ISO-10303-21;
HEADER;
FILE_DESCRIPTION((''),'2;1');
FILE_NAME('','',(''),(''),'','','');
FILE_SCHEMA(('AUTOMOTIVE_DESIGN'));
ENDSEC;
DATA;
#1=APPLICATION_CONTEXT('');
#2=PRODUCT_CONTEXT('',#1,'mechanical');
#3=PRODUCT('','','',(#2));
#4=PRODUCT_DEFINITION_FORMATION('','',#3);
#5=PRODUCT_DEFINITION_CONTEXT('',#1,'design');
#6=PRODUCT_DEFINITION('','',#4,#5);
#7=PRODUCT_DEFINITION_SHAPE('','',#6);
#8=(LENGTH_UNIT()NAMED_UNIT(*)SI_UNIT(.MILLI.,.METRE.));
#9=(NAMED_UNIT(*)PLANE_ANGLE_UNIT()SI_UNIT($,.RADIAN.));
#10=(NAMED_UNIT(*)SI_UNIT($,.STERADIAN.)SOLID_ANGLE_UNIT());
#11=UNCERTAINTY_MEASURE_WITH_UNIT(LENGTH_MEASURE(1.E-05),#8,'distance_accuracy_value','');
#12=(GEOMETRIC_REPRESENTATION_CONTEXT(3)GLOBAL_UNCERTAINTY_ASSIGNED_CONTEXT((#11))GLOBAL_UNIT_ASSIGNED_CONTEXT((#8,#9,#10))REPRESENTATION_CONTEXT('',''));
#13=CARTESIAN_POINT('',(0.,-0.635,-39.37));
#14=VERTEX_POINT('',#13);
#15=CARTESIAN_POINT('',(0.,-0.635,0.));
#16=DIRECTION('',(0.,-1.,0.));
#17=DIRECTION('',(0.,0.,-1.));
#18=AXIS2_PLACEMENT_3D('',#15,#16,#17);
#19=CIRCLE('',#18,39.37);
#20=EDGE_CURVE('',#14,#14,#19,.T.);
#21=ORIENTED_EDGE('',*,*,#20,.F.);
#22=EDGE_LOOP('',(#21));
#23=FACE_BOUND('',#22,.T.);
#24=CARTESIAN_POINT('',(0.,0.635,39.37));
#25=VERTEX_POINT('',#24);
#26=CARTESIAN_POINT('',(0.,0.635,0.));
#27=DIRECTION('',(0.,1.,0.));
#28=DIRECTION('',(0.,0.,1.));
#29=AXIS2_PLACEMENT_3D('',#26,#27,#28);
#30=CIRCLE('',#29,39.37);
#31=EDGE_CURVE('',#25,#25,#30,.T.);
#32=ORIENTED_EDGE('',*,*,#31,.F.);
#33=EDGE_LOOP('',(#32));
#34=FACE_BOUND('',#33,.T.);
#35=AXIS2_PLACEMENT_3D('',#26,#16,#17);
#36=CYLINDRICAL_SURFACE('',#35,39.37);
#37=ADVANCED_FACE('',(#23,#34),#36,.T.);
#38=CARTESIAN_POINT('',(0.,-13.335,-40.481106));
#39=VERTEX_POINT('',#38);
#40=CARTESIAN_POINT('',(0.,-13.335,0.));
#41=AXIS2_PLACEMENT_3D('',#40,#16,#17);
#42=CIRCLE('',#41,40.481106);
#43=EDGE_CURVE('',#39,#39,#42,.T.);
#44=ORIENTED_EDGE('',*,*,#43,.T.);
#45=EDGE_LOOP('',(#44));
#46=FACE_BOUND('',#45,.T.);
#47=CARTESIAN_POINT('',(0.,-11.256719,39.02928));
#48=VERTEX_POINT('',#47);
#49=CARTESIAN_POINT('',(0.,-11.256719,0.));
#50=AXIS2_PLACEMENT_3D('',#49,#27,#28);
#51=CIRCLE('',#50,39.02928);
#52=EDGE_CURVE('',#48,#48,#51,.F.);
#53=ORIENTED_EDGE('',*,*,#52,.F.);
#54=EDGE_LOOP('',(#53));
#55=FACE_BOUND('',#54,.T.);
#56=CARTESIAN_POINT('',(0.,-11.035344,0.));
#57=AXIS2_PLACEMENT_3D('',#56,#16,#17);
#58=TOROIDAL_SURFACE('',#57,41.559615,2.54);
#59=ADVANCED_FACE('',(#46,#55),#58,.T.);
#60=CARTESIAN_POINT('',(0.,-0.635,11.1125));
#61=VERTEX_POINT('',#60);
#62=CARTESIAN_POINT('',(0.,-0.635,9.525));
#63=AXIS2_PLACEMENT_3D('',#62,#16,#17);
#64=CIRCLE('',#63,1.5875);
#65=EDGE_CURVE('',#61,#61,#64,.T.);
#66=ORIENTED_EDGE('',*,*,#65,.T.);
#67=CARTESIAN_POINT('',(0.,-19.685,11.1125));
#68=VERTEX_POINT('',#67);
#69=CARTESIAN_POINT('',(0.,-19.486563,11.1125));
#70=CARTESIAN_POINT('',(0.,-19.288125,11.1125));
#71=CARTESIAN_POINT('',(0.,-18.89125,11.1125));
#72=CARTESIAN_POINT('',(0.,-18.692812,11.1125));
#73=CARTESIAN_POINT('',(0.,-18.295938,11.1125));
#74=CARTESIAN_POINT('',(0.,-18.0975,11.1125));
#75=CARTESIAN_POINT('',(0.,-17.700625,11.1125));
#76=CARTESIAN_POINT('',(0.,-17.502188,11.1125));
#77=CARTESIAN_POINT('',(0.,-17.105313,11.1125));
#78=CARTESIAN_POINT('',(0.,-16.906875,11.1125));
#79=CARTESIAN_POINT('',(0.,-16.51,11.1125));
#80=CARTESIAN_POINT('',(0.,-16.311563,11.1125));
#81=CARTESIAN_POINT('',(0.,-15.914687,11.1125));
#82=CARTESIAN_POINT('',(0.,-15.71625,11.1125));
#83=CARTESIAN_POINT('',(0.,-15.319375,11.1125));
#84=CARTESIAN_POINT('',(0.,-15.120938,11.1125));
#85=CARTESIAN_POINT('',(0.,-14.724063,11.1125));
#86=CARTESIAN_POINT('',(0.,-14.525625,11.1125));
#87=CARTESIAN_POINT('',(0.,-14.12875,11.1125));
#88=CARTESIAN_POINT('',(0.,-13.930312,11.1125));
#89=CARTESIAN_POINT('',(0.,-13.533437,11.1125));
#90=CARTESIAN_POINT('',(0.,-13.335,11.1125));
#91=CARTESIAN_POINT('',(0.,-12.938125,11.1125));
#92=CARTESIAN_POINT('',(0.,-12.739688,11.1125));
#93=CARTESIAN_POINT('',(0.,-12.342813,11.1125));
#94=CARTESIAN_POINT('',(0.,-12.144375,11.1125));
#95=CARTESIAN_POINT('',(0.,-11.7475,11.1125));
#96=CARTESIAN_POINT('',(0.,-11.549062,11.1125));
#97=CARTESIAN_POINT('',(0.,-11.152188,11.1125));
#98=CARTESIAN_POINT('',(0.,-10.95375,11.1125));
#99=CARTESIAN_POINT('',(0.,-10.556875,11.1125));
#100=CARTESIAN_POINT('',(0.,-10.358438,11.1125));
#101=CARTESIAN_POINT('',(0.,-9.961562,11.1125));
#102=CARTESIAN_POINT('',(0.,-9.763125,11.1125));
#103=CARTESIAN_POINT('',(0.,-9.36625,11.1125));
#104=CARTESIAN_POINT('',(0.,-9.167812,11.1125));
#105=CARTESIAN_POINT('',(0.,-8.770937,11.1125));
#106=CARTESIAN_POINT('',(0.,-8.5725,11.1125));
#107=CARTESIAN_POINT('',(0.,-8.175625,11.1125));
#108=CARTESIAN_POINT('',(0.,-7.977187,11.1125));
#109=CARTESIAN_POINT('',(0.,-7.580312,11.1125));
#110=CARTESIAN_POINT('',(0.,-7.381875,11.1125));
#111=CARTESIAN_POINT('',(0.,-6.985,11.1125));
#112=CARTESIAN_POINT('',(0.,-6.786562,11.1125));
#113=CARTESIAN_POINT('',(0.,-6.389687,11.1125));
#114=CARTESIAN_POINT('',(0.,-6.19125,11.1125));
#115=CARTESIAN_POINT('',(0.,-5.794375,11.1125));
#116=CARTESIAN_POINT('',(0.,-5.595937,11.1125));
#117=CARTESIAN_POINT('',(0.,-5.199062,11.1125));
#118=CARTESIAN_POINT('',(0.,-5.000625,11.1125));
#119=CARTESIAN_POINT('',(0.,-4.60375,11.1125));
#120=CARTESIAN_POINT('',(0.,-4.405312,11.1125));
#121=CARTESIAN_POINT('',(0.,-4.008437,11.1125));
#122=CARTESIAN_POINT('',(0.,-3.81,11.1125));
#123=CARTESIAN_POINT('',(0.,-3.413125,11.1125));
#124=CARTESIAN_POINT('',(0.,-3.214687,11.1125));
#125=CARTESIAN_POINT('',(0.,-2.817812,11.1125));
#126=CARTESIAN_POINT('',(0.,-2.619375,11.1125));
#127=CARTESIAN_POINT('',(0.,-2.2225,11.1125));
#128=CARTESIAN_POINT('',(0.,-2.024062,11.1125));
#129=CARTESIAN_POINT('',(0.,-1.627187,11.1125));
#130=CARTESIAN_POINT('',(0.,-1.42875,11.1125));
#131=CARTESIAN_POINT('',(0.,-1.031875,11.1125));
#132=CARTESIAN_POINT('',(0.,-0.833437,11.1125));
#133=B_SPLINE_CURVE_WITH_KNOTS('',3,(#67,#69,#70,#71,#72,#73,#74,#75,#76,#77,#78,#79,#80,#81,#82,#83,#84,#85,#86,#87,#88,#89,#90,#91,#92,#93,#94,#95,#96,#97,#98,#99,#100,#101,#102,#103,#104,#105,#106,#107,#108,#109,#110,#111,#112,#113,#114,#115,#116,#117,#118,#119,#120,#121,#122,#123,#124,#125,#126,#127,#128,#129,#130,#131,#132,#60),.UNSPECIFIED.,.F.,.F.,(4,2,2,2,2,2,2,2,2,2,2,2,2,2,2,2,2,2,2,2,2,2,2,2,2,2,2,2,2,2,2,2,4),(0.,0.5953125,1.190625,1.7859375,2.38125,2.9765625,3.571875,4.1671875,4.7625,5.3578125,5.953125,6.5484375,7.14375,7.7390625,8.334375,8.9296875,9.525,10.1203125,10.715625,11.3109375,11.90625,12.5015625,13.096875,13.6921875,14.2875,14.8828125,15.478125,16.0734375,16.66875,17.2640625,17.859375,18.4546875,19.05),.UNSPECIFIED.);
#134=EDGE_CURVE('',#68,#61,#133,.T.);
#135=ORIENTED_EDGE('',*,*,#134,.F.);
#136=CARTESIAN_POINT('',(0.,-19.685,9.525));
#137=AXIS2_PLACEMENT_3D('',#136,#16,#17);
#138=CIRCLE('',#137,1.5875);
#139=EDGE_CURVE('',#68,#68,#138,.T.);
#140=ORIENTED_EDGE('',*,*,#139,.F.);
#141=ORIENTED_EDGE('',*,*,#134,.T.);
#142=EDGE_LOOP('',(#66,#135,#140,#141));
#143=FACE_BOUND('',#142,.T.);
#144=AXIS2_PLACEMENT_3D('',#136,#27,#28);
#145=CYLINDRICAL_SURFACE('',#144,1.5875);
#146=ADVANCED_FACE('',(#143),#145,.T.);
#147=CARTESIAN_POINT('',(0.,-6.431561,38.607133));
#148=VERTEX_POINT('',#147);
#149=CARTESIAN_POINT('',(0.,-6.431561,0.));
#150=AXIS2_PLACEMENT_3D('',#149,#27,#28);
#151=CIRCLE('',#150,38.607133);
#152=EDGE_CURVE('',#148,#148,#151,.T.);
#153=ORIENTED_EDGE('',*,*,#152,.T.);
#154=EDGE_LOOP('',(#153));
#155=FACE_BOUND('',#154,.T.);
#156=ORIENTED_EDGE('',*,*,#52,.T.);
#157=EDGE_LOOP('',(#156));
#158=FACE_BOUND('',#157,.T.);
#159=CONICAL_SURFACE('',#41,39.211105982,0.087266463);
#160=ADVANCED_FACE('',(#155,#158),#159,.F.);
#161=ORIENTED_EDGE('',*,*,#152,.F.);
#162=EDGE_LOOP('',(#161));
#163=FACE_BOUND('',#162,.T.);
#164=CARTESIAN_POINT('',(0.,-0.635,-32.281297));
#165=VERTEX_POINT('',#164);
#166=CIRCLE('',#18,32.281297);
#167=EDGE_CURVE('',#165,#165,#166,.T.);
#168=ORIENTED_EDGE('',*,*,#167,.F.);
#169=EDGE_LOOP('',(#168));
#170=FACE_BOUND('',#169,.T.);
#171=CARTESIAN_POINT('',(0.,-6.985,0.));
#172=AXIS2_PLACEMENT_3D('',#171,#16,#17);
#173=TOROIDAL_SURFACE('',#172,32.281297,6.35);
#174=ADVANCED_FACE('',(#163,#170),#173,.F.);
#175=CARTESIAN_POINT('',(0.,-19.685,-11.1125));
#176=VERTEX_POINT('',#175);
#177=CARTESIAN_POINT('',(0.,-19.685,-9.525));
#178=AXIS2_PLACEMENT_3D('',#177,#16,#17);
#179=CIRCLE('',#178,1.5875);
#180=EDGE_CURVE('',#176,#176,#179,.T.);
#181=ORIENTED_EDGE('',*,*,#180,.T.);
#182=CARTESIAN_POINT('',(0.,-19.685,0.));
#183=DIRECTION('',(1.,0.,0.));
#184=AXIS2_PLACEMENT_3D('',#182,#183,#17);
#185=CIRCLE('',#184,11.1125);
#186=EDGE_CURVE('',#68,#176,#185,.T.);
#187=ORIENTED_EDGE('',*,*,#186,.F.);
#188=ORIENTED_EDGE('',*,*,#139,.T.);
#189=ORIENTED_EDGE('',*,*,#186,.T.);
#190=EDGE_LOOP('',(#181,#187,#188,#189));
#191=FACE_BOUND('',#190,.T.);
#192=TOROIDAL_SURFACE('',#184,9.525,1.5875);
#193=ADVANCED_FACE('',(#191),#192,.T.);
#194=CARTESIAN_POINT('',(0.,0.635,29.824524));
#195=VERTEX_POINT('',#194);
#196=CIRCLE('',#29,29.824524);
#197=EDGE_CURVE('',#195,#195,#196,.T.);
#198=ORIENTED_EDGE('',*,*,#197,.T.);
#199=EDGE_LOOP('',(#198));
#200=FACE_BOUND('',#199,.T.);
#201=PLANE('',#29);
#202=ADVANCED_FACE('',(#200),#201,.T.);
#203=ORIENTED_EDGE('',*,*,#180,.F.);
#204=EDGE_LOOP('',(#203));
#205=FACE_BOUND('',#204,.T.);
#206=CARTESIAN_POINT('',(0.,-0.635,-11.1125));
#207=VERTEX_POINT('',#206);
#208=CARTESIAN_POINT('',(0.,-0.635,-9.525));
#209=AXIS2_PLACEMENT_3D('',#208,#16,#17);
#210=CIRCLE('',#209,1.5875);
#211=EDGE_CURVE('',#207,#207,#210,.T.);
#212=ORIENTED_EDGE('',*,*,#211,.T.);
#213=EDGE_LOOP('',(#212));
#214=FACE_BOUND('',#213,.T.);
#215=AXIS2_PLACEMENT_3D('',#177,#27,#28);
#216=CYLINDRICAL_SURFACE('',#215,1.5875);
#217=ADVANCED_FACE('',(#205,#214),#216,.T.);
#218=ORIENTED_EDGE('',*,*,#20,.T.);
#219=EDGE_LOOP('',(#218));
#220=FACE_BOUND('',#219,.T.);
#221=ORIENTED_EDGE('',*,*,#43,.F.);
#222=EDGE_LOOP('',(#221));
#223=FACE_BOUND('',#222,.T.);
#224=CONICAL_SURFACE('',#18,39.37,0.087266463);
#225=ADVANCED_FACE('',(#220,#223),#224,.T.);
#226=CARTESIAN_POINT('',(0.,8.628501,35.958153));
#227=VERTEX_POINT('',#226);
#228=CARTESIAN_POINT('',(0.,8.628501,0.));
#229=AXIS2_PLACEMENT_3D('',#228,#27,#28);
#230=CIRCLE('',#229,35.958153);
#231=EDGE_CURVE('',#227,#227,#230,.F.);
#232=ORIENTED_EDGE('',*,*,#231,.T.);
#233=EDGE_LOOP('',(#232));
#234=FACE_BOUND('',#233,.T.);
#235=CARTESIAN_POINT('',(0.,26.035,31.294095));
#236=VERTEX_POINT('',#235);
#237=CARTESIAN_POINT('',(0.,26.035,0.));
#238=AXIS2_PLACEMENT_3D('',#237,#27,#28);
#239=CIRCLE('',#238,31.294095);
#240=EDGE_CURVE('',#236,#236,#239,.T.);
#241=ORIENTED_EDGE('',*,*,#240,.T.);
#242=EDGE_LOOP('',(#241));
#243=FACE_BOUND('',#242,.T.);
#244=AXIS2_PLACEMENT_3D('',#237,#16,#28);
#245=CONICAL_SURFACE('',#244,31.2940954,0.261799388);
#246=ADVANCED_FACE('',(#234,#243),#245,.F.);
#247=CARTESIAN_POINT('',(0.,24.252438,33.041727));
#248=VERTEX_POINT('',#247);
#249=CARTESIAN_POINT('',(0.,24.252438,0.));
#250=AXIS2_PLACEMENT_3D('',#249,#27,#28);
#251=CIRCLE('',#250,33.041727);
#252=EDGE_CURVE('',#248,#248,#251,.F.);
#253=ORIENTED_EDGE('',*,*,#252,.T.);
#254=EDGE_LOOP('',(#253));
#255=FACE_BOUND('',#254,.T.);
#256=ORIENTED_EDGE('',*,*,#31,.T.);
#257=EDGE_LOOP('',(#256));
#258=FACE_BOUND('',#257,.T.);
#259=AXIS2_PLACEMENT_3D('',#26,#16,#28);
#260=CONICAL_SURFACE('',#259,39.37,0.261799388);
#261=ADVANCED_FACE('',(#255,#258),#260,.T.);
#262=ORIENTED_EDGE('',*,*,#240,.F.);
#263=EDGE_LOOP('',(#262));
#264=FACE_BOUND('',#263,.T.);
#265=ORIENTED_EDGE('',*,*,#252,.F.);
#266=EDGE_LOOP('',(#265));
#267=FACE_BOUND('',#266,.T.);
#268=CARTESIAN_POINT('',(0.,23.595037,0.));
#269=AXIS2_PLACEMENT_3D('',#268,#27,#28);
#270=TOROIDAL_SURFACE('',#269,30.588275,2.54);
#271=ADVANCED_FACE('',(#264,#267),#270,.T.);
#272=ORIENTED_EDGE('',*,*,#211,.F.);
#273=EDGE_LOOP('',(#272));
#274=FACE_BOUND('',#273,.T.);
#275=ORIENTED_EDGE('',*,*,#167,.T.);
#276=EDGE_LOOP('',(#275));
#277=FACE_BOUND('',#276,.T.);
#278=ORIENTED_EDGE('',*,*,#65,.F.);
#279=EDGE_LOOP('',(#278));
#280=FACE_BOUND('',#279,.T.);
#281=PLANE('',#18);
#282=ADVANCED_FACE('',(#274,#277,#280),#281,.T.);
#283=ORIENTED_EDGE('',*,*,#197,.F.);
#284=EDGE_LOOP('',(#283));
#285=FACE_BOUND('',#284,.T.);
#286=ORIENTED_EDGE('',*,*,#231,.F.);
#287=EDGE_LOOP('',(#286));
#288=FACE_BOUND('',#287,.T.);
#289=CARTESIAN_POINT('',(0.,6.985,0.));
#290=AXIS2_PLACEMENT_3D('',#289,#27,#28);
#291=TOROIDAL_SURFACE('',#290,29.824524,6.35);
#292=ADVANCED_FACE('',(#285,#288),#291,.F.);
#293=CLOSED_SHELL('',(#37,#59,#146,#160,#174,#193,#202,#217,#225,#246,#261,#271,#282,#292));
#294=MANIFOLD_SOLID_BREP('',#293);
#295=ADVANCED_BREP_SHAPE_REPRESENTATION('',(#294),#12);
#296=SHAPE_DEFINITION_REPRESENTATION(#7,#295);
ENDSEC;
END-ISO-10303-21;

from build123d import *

# Parameters (mm, degrees)
SKETCH1_R           = 39.37
BOSS_EXTRUDE1_DEPTH = 0.635
SKETCH4_R           = 39.37
BOSS_EXTRUDE2_DEPTH = 25.4
BOSS_EXTRUDE2_TAPER = 15
SKETCH5_R           = 31.2940954
CUT_EXTRUDE2_DEPTH  = 25.4
CUT_EXTRUDE2_DRAFT  = 15
SKETCH6_R           = 39.37
BOSS_EXTRUDE3_DEPTH = 12.7
BOSS_EXTRUDE3_DRAFT = -5
SKETCH8_R           = 39.211105982
CUT_EXTRUDE3_DEPTH  = 12.7
CUT_EXTRUDE3_DRAFT  = -5
SKETCH9_R           = 1.5875
BOSS_EXTRUDE4_DEPTH = 19.05
SKETCH12_R          = 1.5875
REVOLVE1_ANGLE      = 180
FILLET1_R           = 6.35
FILLET3_R           = 2.54
FILLET4_R           = 6.35
FILLET5_R           = 2.54


with BuildPart() as part:
    # Sketch1 → Boss-Extrude1 (new, symmetric)
    with BuildSketch(Plane(origin=(0, 0, 0), x_dir=(1, 0, 0), z_dir=(0, 1, 0))):
        with Locations(Location((0, 0, 0), (0, 0, 270))):
            Circle(SKETCH1_R)
    extrude(amount=BOSS_EXTRUDE1_DEPTH, both=True)

    # Sketch4 → Boss-Extrude2 (add)
    with BuildSketch(Plane(origin=(0, 0.635, 0), x_dir=(1, 0, 0), z_dir=(0, 1, 0))):
        with Locations(Location((0, 0, 0), (0, 0, 270))):
            Circle(SKETCH4_R)
    extrude(amount=BOSS_EXTRUDE2_DEPTH, taper=BOSS_EXTRUDE2_TAPER)


with BuildPart() as cut_extrude2_tool:
    # Sketch5 → Cut-Extrude2 (with draft: the straight prism first)
    with BuildSketch(Plane(origin=(0, 26.035, 0), x_dir=(1, 0, 0), z_dir=(0, 1, 0))):
        Circle(SKETCH5_R)
    extrude(amount=-CUT_EXTRUDE2_DEPTH)
    # Cut-Extrude2: the draft: its side faces are tilted about the plane it starts from
    cut_extrude2_sides = [cut_extrude2_tool.faces().sort_by_distance(p)[0] for p in [
        (-31.2940954, 13.335, 0),
    ]]
    draft(cut_extrude2_sides, Plane(origin=(0, 26.035, 0), x_dir=(1, 0, 0), z_dir=(0, 1, 0)), CUT_EXTRUDE2_DRAFT)


with BuildPart() as part_1:
    add(part.part)

    # Cut-Extrude2: cut by cut_extrude2_tool
    add(cut_extrude2_tool.part, mode=Mode.SUBTRACT)


with BuildPart() as boss_extrude3_tool:
    # Sketch6 → Boss-Extrude3 (with draft: the straight prism first)
    with BuildSketch(Plane.XZ.offset(0.635)):
        with Locations(Location((0, 0, 0), (0, 0, 270))):
            Circle(SKETCH6_R)
    extrude(amount=BOSS_EXTRUDE3_DEPTH)
    # Boss-Extrude3: the draft: its side faces are tilted about the plane it starts from
    boss_extrude3_sides = [boss_extrude3_tool.faces().sort_by_distance(p)[0] for p in [
        (0, -6.985, 39.37),
    ]]
    draft(boss_extrude3_sides, Plane.XZ.offset(0.635), BOSS_EXTRUDE3_DRAFT)


with BuildPart() as part_2:
    add(part_1.part)

    # Boss-Extrude3: add boss_extrude3_tool
    add(boss_extrude3_tool.part)


with BuildPart() as cut_extrude3_tool:
    # Sketch8 → Cut-Extrude3 (with draft: the straight prism first)
    with BuildSketch(Plane.XZ.offset(13.335)):
        Circle(SKETCH8_R)
    extrude(amount=-CUT_EXTRUDE3_DEPTH)
    # Cut-Extrude3: the draft: its side faces are tilted about the plane it starts from
    cut_extrude3_sides = [cut_extrude3_tool.faces().sort_by_distance(p)[0] for p in [
        (-39.211105982, -6.985, 0),
    ]]
    draft(cut_extrude3_sides, Plane.XZ.offset(13.335), CUT_EXTRUDE3_DRAFT)


with BuildPart() as part_3:
    add(part_2.part)

    # Cut-Extrude3: cut by cut_extrude3_tool
    add(cut_extrude3_tool.part, mode=Mode.SUBTRACT)

    # Sketch9 → Boss-Extrude4 (add)
    with BuildSketch(Plane.XZ.offset(0.635)):
        with Locations(Location((0, 9.525, 0), (0, 0, 90))):
            Circle(SKETCH9_R)
        with Locations(Location((0, -9.525, 0), (0, 0, 90))):
            Circle(SKETCH9_R)
    extrude(amount=BOSS_EXTRUDE4_DEPTH)

    # Sketch12 → Revolve1 (revolve)
    with BuildSketch(Plane(origin=(0, -19.685, 0), x_dir=(-1, 0, 0), z_dir=(0, -1, 0))):
        with Locations(Location((0, 9.525, 0), (0, 0, 90))):
            Circle(SKETCH12_R)
    revolve(axis=Axis((0, -19.685, 0), (-1, 0, 0)), revolution_arc=REVOLVE1_ANGLE)

    # Fillet1
    fillet1_edges = [part_3.edges().sort_by_distance(p)[0] for p in [
        (-38.100004888, 0.635, 0),
    ]]
    fillet(fillet1_edges, radius=FILLET1_R)

    # Fillet3
    # the kernel refuses this fillet: 2.54 mm, written as the material it takes off along each edge
    with BuildSketch(Plane(origin=(0, 26.035, 0), x_dir=(0, 0, 1), z_dir=(1, 0, 0))) as fillet3_piece_1:
        with BuildLine():
            CenterArc((30.588275028, 2.439962623), FILLET3_R, 286.133838587, 58.866161413)
            Line((33.041726627, 1.782562249), (33.090795659, 1.769414241))
            Line((33.090795659, 1.769414241), (32.613159544, -0.013148007))
            Line((32.613159544, -0.013148007), (32.564090512, -0.0508))
            ThreePointArc((32.564090512, -0.0508), (31.929092956, -0.0508), (31.308211807, -0.048799252))
            Line((31.308211807, -0.048799252), (31.2940954, 0))
        make_face()
    revolve(axis=Axis((0, 26.035, 0), (0, -1, 0)), mode=Mode.SUBTRACT)

    # Fillet4
    fillet4_edges = [part_3.edges().sort_by_distance(p)[0] for p in [
        (-38.099999955, -0.635, 0),
    ]]
    fillet(fillet4_edges, radius=FILLET4_R)

    # Fillet5
    # the kernel refuses this fillet: 2.54 mm, written as the material it takes off along each edge
    with BuildSketch(Plane(origin=(0, -13.335, 0), x_dir=(1, 0, 0), z_dir=(0, 0, -1))) as fillet5_piece_1:
        with BuildLine():
            CenterArc((41.559614506, -2.299656379), FILLET5_R, 115.125957248, 59.874042752)
            Line((40.481106027, 0), (40.459535857, 0.045993128))
            ThreePointArc((40.459535857, 0.045993128), (39.846106004, 0.0508), (39.211105982, 0.0508))
            Line((39.211105982, 0.0508), (39.160499291, 0.004427512))
            Line((39.160499291, 0.004427512), (38.978673282, -2.07385328))
            Line((38.978673282, -2.07385328), (39.029279973, -2.078280792))
        make_face()
    revolve(axis=Axis((0, -13.335, 0), (0, -1, 0)), mode=Mode.SUBTRACT)


solid = part_3.part
